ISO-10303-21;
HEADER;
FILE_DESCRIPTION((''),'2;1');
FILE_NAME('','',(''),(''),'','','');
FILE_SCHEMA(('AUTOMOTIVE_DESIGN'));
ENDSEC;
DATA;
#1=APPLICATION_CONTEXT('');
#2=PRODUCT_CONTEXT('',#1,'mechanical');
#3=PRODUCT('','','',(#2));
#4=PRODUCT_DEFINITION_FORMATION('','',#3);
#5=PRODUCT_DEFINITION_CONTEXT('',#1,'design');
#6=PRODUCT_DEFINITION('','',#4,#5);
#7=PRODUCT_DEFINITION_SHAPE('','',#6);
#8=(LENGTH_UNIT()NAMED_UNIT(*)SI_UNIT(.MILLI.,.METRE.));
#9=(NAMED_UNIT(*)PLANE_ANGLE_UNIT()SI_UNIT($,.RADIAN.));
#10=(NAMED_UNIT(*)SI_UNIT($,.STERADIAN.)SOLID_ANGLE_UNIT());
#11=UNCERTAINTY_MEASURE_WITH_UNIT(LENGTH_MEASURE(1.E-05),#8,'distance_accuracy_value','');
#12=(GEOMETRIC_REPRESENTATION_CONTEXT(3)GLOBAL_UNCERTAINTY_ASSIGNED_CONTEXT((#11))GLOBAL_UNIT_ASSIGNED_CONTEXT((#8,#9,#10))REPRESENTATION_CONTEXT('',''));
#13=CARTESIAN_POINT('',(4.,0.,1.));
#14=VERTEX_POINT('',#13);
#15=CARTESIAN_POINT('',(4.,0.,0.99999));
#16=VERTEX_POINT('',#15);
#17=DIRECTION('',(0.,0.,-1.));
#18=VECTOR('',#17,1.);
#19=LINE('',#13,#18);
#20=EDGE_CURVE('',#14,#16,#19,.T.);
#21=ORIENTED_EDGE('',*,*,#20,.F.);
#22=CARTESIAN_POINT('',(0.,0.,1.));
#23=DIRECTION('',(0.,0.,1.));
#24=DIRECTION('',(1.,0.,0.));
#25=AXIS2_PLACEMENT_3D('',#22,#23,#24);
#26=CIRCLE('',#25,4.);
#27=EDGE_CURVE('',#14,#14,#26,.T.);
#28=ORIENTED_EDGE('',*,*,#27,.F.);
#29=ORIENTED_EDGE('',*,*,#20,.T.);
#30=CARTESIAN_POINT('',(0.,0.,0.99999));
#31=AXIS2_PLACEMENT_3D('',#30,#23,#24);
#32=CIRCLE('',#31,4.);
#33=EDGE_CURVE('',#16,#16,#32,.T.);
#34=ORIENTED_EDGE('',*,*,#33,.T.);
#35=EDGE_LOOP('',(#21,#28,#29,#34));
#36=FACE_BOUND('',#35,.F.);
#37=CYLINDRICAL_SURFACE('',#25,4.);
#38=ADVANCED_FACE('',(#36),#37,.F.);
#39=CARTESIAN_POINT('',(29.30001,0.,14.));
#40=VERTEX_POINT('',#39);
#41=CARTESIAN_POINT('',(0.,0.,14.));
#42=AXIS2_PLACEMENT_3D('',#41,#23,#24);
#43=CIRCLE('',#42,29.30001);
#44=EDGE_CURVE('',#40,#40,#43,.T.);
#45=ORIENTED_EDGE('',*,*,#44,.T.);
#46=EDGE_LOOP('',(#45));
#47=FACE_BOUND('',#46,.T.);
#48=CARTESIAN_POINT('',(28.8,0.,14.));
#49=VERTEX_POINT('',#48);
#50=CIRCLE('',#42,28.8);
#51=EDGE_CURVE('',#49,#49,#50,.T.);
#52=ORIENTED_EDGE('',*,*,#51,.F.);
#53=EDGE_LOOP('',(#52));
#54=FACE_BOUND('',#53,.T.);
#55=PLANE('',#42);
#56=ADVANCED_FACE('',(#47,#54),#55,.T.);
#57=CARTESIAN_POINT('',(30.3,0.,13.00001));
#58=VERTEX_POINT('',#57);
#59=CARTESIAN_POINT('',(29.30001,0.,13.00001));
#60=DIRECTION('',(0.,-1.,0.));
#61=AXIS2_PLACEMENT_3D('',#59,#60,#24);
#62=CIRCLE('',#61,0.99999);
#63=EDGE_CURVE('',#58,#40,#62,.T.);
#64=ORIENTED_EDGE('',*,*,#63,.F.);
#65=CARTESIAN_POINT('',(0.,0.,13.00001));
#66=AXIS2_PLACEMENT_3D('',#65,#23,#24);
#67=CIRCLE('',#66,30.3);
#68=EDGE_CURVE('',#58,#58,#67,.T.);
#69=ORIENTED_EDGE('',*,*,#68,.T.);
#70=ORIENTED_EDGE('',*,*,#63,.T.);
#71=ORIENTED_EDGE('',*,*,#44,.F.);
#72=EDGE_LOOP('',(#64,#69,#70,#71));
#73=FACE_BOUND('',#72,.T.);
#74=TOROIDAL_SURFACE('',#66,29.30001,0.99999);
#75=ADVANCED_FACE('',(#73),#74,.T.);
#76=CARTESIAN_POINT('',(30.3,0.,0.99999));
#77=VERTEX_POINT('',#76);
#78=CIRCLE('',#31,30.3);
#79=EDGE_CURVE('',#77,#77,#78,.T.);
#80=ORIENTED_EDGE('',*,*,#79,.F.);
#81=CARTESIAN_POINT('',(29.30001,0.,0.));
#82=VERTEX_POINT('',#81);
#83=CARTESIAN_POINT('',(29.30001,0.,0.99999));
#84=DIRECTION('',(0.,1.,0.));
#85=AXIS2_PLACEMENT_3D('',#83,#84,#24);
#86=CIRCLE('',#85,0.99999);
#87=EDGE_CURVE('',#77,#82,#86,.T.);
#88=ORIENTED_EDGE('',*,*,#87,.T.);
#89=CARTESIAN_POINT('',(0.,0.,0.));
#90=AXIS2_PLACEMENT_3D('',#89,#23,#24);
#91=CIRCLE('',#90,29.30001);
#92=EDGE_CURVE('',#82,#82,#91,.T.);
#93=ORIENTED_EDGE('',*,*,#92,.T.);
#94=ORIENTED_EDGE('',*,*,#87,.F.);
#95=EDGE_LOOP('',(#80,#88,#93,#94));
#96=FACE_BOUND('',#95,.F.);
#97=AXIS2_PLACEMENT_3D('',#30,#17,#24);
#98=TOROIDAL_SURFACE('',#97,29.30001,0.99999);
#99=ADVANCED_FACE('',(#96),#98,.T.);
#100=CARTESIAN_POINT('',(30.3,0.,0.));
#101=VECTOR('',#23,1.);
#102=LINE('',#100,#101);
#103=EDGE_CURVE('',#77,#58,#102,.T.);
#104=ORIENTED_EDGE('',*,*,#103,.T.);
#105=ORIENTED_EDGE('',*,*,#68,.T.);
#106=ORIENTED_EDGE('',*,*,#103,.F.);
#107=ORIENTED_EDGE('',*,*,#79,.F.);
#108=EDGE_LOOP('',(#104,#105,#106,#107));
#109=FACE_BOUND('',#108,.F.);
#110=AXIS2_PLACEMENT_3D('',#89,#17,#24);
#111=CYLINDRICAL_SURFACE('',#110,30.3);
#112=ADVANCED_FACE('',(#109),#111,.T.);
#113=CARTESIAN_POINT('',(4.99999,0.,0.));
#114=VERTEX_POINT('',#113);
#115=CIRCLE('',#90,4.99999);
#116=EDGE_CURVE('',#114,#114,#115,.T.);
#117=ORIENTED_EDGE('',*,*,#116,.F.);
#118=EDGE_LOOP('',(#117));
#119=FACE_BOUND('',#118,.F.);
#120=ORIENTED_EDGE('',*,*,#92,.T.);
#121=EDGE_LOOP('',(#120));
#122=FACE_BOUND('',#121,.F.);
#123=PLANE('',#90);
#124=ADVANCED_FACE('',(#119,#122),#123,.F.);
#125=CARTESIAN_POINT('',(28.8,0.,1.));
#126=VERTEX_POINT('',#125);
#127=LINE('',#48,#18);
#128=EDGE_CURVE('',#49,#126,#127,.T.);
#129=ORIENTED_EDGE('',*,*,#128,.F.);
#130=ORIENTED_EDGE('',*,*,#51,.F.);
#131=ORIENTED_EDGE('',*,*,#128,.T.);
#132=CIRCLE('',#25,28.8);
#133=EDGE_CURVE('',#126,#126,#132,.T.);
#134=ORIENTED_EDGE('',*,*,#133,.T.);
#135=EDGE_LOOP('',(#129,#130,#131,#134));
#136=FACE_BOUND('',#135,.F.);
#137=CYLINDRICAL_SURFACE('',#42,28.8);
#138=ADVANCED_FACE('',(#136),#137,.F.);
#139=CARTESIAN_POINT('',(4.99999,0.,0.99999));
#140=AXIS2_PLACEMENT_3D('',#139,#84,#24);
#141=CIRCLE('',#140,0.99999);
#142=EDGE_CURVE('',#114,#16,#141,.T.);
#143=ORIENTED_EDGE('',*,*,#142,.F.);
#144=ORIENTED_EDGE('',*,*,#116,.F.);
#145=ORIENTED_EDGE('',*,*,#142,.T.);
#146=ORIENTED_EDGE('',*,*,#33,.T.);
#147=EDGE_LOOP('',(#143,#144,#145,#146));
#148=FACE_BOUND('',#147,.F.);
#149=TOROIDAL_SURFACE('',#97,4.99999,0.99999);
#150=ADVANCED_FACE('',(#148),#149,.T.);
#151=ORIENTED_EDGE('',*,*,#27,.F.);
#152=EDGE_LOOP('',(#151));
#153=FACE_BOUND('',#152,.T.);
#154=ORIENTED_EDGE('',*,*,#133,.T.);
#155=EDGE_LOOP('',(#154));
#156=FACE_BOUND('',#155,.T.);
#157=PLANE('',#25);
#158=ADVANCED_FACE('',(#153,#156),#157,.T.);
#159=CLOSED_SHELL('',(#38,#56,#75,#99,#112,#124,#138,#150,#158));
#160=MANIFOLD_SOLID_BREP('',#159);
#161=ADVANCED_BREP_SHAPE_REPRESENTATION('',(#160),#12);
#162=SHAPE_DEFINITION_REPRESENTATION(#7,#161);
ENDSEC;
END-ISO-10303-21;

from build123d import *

# Parameters (mm, degrees)
F0_R     = 30.3
F1_DEPTH = 14
F2_R     = 28.8
F3_DEPTH = 13
F4_R     = 4
F5_DEPTH = 25.4
F6_R     = 0.99999


# Not quite as in the source:
# - a fillet or chamfer is up to 0.001 mm smaller than in the source, because OpenCascade refuses the exact size


with BuildPart() as f1:
    # F0 (on Top) → F1 (new body)
    with BuildSketch(Plane.XY):
        Circle(F0_R)
    extrude(amount=F1_DEPTH)

    # F2 (on face) → F3 (cut)
    with BuildSketch(Plane.XY.offset(14)):
        Circle(F2_R)
    extrude(amount=-F3_DEPTH, mode=Mode.SUBTRACT)

    # F4 (on face) → F5 (cut)
    with BuildSketch(Plane.XY.offset(1)):
        Circle(F4_R)
    extrude(amount=-F5_DEPTH, mode=Mode.SUBTRACT)

    # F6 (radius 1 in the source; OpenCascade refuses exactly that, so slightly less here)
    f6_edges = [f1.edges().sort_by_distance(p)[0] for p in [
        (-30.3, 0, 0),
        (-4, 0, 0),
        (-30.3, 0, 14),
    ]]
    fillet(f6_edges, radius=F6_R)


solid = f1.part
